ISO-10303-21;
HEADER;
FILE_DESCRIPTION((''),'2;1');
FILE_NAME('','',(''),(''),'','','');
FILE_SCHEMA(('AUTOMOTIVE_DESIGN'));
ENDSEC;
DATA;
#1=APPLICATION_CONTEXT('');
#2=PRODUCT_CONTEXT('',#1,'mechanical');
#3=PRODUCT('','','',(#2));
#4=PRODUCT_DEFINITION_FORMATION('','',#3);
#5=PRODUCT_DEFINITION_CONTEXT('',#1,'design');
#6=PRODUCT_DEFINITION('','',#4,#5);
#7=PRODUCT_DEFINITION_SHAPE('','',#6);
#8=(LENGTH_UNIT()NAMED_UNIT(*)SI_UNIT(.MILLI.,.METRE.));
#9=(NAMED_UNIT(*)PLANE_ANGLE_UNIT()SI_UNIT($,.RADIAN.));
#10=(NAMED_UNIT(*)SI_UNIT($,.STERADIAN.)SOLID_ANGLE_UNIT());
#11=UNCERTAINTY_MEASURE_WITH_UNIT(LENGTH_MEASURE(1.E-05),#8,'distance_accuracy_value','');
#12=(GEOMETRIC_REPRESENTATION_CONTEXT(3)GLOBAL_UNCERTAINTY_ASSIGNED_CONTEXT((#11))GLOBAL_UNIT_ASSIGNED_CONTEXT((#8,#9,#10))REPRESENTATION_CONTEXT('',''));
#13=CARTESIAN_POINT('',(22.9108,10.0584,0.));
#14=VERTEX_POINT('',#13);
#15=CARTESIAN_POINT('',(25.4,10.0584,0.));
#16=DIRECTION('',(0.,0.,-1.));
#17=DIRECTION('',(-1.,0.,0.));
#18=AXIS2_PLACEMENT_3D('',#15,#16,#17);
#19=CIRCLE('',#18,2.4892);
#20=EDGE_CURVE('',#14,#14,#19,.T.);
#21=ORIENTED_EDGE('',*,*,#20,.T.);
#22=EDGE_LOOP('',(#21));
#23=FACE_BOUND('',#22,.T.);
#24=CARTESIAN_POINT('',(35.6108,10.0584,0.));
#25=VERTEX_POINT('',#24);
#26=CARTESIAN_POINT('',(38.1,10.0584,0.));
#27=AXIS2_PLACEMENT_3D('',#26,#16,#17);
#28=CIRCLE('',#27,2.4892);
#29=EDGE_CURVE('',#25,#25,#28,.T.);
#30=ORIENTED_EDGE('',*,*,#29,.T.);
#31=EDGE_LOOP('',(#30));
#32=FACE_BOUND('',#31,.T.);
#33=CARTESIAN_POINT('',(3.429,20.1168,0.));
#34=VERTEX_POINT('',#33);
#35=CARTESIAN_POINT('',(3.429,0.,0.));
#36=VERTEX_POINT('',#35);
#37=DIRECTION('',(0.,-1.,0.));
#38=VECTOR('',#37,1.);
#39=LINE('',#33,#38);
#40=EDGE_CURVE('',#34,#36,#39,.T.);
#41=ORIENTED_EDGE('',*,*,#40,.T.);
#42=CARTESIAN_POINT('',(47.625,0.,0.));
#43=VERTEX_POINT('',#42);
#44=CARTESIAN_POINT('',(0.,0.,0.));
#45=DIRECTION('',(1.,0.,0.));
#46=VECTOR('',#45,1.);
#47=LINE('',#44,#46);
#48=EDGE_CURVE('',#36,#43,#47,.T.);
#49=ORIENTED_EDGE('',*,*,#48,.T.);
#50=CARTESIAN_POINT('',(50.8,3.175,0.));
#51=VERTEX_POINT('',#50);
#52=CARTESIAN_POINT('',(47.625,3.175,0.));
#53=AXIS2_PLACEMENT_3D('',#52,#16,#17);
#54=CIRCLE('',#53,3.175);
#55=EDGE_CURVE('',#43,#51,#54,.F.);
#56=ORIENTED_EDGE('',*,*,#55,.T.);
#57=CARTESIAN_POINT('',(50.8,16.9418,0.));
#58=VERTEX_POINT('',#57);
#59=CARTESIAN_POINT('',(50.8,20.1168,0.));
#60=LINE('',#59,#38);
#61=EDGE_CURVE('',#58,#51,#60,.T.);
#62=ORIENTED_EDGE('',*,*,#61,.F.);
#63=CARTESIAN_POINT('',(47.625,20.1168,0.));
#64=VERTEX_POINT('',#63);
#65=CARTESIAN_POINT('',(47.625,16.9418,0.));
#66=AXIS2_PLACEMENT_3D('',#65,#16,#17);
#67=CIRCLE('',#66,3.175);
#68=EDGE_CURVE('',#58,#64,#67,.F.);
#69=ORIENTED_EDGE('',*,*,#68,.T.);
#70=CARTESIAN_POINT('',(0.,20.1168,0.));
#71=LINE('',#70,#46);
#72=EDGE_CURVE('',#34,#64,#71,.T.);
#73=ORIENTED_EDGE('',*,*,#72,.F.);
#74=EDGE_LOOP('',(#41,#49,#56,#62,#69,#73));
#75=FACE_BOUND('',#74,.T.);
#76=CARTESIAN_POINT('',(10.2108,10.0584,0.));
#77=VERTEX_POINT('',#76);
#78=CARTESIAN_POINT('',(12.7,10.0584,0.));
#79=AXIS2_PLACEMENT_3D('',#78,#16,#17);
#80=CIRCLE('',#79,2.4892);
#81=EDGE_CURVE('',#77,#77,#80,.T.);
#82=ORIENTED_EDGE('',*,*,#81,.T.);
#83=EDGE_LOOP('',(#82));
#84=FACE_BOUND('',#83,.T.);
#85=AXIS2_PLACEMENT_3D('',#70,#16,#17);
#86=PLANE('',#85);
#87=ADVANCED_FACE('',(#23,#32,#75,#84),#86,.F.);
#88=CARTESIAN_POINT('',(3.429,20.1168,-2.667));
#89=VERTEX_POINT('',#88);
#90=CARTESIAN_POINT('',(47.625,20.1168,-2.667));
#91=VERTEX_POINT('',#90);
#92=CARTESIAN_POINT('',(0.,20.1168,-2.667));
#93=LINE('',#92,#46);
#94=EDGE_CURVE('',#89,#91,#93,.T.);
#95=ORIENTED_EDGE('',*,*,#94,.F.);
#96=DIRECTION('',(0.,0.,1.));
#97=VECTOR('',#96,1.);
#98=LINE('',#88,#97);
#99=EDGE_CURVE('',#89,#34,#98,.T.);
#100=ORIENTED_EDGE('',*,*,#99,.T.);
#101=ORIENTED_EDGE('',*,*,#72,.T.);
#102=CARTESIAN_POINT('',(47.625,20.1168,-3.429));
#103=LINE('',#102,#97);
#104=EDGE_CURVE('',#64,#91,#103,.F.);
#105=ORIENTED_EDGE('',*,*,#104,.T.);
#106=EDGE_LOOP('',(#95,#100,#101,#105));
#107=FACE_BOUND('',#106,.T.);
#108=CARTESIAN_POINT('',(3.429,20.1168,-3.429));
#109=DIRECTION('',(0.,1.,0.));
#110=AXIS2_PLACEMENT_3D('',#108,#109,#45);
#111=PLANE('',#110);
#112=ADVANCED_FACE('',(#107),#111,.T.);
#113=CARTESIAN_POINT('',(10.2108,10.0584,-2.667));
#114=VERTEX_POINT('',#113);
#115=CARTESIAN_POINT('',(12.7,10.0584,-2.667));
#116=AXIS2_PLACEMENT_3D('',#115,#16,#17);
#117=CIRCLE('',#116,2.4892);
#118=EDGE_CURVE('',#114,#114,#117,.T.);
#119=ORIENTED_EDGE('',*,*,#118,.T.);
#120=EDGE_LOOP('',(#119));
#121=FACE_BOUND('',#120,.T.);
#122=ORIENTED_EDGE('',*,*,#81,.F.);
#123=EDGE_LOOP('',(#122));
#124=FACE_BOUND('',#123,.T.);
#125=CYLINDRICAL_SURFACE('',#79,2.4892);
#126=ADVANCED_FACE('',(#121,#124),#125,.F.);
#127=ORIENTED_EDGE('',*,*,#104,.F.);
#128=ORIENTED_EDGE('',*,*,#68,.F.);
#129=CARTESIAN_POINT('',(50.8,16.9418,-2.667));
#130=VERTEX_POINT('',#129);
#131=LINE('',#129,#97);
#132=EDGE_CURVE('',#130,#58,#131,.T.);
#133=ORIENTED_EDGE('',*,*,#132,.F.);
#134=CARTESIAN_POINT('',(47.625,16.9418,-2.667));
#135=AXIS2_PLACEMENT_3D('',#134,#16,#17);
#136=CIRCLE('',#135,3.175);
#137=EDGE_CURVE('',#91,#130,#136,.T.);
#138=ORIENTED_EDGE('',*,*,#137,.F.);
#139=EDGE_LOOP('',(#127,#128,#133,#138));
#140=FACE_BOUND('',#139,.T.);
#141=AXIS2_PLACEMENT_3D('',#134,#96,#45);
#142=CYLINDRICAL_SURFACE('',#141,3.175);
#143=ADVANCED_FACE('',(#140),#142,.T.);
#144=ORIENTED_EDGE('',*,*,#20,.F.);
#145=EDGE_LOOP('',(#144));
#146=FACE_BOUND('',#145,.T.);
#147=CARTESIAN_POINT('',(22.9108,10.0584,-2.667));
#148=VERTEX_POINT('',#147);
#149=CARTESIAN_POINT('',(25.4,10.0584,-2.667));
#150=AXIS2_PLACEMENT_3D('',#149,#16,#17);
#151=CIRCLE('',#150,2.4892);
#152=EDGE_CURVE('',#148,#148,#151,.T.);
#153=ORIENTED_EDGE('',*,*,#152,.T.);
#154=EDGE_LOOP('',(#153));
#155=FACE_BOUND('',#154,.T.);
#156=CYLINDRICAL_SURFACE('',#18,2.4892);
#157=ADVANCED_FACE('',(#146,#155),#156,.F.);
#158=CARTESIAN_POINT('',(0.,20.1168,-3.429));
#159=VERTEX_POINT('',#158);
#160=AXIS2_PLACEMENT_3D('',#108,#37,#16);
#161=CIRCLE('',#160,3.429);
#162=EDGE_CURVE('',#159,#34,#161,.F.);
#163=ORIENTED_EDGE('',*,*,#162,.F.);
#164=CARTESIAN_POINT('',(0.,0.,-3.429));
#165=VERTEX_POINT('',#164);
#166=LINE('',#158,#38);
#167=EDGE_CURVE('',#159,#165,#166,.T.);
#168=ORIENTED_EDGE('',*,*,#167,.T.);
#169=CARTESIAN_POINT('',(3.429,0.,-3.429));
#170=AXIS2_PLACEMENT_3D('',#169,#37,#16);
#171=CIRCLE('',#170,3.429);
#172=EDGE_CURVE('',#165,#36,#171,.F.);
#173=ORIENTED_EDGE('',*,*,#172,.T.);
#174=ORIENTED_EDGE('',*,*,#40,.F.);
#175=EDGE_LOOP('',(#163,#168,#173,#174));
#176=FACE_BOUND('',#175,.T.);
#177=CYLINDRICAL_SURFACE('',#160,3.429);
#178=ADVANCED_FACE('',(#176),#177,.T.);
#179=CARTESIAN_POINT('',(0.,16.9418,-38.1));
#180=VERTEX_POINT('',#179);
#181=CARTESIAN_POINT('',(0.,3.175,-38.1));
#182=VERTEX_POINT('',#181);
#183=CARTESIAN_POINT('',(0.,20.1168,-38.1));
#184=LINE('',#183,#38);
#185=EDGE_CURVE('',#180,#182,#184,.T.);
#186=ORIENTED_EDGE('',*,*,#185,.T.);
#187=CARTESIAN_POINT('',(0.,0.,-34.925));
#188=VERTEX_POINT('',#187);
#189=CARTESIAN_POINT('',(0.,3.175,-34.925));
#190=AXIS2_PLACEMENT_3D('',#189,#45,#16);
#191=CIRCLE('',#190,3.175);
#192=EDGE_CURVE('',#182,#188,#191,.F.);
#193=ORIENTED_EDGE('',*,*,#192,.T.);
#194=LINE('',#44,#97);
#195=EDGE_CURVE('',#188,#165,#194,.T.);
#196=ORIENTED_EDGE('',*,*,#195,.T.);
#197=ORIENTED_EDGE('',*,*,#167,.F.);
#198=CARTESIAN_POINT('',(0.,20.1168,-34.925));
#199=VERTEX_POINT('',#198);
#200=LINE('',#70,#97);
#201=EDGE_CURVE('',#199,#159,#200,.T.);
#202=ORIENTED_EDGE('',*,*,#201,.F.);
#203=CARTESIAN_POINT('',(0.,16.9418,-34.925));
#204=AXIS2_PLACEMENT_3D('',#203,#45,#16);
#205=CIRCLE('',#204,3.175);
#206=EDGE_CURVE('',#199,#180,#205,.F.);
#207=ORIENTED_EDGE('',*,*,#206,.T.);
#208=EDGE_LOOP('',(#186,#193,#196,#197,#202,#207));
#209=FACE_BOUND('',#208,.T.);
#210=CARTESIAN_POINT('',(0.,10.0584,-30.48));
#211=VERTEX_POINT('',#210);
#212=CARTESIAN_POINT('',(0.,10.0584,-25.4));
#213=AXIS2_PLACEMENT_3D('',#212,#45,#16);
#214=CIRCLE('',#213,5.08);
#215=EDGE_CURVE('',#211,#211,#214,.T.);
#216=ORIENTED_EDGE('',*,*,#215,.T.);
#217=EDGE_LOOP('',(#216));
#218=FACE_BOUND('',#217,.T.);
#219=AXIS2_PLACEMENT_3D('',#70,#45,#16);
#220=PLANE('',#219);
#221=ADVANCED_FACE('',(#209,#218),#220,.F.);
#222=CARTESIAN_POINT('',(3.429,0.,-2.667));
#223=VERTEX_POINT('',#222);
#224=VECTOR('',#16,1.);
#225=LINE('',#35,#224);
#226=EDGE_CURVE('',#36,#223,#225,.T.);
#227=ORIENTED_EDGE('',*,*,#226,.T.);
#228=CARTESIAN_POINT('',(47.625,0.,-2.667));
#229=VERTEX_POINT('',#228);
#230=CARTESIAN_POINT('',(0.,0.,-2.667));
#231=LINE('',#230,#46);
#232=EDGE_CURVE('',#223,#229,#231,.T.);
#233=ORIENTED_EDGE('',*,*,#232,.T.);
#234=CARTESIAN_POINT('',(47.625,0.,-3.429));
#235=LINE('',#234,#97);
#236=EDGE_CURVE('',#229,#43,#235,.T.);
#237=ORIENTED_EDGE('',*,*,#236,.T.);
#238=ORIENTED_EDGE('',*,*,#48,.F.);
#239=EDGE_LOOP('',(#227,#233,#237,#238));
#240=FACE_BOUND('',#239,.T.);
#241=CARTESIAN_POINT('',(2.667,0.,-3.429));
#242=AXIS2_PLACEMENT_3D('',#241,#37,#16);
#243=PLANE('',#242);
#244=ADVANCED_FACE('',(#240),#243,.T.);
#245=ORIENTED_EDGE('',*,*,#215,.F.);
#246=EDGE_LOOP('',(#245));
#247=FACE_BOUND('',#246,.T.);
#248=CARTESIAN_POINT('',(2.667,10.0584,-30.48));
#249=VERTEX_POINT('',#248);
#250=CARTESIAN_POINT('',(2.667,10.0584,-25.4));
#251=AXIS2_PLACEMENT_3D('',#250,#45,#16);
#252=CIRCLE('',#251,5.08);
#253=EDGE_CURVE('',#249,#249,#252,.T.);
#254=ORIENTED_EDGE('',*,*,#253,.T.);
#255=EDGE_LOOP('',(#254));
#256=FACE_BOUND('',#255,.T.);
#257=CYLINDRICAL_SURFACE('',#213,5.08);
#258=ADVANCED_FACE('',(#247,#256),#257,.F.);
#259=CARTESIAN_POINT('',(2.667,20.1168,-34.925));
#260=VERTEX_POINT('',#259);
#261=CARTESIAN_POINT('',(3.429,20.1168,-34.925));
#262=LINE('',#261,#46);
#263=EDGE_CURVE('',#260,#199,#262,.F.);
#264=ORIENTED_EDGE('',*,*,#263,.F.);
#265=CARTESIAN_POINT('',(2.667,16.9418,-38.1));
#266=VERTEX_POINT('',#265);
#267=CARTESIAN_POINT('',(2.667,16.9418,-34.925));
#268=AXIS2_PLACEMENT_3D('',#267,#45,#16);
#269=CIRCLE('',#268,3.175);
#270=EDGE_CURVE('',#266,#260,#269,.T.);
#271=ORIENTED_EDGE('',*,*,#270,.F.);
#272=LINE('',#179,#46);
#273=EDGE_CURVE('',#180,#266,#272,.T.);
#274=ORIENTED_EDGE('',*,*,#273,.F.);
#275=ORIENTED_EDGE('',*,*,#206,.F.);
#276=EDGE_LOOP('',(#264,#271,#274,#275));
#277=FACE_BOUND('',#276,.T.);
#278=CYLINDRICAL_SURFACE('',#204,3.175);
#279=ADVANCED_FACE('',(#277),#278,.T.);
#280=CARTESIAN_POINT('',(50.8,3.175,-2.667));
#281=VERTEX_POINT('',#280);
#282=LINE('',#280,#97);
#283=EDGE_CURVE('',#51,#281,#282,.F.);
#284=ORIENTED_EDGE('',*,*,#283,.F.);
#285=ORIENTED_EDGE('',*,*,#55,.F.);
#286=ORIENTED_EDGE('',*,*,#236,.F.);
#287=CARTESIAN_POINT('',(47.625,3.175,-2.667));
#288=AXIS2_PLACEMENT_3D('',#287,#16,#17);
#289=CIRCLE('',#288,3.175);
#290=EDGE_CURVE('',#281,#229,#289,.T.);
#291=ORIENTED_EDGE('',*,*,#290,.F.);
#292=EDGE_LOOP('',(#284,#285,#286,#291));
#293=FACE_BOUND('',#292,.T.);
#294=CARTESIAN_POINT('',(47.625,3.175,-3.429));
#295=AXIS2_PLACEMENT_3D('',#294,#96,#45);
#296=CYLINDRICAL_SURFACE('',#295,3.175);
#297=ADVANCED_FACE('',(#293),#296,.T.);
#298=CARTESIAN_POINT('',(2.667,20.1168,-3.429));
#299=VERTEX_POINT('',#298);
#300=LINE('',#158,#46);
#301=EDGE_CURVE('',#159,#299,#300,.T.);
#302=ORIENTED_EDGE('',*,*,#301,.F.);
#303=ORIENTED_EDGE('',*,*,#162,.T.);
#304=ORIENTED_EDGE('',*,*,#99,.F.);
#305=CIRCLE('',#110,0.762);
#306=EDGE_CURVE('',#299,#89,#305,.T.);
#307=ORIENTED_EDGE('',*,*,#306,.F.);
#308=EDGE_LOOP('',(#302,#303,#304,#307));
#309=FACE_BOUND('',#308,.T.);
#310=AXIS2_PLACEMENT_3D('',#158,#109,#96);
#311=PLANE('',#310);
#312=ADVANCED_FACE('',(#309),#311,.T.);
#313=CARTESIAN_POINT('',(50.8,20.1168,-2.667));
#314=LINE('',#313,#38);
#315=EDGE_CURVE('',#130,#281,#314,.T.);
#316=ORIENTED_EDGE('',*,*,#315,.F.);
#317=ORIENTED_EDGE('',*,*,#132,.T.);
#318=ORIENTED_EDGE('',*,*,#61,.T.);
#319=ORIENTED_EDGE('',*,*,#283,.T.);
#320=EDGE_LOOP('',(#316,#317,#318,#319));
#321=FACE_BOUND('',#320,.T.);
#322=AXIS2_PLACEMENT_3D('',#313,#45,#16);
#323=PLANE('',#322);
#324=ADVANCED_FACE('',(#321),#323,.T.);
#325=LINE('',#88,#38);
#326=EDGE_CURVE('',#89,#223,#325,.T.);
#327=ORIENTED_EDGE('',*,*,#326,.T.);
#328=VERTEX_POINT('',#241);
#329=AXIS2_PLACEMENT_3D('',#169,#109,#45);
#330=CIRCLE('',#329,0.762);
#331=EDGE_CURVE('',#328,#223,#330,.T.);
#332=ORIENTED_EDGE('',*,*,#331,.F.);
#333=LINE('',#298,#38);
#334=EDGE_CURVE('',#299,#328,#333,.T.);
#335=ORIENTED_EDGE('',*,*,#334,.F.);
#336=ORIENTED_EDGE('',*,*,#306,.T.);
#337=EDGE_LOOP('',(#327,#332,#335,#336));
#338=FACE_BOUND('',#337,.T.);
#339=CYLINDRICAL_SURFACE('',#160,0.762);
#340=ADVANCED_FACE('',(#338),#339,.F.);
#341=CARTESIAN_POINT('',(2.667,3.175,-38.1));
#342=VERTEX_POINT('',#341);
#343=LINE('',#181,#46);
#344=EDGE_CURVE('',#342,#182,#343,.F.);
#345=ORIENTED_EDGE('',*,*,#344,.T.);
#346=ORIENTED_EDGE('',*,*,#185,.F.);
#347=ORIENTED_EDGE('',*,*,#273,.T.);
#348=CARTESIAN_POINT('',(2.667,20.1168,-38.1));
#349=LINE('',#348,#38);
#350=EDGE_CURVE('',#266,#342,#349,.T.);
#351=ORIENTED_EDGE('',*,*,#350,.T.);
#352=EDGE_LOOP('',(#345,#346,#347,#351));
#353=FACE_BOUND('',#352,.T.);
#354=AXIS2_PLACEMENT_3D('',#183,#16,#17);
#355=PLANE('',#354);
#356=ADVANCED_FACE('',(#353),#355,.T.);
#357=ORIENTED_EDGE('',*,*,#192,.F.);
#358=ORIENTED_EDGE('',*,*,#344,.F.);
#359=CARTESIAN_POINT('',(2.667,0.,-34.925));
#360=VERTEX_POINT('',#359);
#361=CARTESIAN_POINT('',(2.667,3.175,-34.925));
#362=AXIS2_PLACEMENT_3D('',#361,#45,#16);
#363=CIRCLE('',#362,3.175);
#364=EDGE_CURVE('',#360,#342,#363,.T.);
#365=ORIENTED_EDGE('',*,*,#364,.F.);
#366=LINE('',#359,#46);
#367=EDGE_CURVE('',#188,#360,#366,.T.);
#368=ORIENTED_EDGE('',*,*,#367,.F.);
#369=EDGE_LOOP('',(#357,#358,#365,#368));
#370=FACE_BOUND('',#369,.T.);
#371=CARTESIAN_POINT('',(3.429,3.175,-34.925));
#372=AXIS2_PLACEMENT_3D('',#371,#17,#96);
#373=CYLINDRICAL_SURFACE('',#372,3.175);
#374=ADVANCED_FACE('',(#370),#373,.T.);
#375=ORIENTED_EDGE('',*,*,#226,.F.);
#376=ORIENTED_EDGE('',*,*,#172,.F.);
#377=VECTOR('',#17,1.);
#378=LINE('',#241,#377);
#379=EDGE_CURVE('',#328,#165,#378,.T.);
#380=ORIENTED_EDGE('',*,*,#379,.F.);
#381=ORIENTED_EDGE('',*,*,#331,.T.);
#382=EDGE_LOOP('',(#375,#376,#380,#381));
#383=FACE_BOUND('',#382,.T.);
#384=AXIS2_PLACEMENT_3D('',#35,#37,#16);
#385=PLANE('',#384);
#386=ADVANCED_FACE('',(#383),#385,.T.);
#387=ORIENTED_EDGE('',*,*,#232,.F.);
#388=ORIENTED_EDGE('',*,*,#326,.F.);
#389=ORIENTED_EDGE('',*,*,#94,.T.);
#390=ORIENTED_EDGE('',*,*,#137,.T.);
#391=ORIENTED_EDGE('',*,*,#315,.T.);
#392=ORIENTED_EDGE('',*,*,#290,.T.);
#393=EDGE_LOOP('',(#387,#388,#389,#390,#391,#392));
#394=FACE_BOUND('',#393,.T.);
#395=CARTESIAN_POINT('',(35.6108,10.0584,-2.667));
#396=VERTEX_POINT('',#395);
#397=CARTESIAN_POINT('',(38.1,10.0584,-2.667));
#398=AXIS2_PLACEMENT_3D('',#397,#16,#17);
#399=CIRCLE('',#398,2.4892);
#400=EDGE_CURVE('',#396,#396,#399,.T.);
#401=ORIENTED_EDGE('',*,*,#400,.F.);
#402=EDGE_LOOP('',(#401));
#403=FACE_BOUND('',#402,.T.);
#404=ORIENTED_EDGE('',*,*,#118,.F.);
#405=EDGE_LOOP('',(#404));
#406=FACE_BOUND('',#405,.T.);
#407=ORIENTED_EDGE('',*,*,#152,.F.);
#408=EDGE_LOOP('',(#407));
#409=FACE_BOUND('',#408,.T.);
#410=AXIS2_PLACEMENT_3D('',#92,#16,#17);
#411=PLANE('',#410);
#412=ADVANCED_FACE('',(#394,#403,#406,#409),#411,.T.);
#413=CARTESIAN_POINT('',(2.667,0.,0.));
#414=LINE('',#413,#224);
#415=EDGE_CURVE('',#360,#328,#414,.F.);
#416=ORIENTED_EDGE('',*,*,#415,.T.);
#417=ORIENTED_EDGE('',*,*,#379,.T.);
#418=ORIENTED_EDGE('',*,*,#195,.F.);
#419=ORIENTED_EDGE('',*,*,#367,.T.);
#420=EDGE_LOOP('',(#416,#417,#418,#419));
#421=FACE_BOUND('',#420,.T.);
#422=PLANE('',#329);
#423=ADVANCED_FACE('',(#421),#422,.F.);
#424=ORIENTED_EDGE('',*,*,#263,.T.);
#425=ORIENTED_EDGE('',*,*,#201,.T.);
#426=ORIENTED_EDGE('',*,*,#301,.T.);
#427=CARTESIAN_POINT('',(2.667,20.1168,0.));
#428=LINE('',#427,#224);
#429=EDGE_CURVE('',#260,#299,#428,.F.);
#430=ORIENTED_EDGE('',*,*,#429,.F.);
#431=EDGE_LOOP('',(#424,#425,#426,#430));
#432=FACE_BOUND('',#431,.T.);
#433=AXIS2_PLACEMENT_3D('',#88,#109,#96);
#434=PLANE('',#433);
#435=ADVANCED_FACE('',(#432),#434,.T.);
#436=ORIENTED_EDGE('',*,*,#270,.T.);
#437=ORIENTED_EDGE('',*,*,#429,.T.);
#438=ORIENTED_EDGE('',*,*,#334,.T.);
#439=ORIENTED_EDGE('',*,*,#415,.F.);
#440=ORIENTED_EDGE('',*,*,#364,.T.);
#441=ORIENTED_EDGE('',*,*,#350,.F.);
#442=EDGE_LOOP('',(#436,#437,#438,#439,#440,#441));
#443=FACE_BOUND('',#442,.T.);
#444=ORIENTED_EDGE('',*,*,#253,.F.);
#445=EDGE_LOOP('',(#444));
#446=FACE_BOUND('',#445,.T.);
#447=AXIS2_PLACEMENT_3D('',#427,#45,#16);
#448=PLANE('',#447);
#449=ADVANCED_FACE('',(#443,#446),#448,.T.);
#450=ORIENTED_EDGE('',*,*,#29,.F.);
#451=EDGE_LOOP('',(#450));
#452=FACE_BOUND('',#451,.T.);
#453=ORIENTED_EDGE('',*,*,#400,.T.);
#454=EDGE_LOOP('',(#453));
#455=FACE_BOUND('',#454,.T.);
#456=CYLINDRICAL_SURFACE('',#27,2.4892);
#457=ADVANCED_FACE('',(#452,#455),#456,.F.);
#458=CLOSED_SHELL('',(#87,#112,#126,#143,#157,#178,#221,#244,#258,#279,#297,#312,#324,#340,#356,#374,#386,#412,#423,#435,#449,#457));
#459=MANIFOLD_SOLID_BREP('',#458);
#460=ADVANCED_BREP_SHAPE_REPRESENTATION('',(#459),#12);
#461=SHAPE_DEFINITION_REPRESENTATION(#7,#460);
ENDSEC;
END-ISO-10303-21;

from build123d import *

# Parameters (mm, degrees)
BASE_FLANGE1_DEPTH = 20.1168
SKETCH6_R          = 2.4892
CUT_EXTRUDE1_DEPTH = 66.121602646
SKETCH7_R          = 5.08
CUT_EXTRUDE2_DEPTH = 65.599391106
FILLET1_R          = 3.175


# Read off the part's stored shape, not the designer's step: Base-Flange1
with BuildPart() as part:
    # Base-Flange1 outline → Base-Flange1 (new body)
    with BuildSketch(Plane(origin=(0, 0, 0), x_dir=(1, 0, 0), z_dir=(0, 1, 0))):
        with BuildLine():
            Line((3.429, 0), (50.8, 0))
            Line((50.8, 0), (50.8, 2.667))
            Line((50.8, 2.667), (3.429, 2.667))
            ThreePointArc((3.429, 2.667), (2.890184633, 2.890184633), (2.667, 3.429))
            Line((2.667, 3.429), (2.667, 38.1))
            Line((2.667, 38.1), (0, 38.1))
            Line((0, 38.1), (0, 3.429))
            ThreePointArc((0, 3.429), (1.004330847, 1.004330847), (3.429, 0))
        make_face()
    extrude(amount=BASE_FLANGE1_DEPTH)

    # Sketch6 → Cut-Extrude1 (cut, through all)
    with BuildSketch(Plane(origin=(0, 0, -2.667), x_dir=(-1, 0, 0), z_dir=(0, 0, -1))):
        with Locations((-38.1, 10.0584)):
            Circle(SKETCH6_R)
        with Locations((-25.4, 10.0584)):
            Circle(SKETCH6_R)
        with Locations((-12.7, 10.0584)):
            Circle(SKETCH6_R)
    extrude(amount=-CUT_EXTRUDE1_DEPTH, mode=Mode.SUBTRACT)

    # Sketch7 → Cut-Extrude2 (cut, through all)
    with BuildSketch(Plane(origin=(2.667, 0, 0), x_dir=(0, 0, -1), z_dir=(1, 0, 0))):
        with Locations((25.4, 10.0584)):
            Circle(SKETCH7_R)
    extrude(amount=-CUT_EXTRUDE2_DEPTH, mode=Mode.SUBTRACT)

    # Fillet1
    fillet1_edges = [part.edges().sort_by_distance(p)[0] for p in [
        (1.3335, 20.1168, -38.1),
        (1.3335, 0, -38.1),
        (50.8, 20.1168, -1.3335),
        (50.8, 0, -1.3335),
    ]]
    fillet(fillet1_edges, radius=FILLET1_R)


solid = part.part
